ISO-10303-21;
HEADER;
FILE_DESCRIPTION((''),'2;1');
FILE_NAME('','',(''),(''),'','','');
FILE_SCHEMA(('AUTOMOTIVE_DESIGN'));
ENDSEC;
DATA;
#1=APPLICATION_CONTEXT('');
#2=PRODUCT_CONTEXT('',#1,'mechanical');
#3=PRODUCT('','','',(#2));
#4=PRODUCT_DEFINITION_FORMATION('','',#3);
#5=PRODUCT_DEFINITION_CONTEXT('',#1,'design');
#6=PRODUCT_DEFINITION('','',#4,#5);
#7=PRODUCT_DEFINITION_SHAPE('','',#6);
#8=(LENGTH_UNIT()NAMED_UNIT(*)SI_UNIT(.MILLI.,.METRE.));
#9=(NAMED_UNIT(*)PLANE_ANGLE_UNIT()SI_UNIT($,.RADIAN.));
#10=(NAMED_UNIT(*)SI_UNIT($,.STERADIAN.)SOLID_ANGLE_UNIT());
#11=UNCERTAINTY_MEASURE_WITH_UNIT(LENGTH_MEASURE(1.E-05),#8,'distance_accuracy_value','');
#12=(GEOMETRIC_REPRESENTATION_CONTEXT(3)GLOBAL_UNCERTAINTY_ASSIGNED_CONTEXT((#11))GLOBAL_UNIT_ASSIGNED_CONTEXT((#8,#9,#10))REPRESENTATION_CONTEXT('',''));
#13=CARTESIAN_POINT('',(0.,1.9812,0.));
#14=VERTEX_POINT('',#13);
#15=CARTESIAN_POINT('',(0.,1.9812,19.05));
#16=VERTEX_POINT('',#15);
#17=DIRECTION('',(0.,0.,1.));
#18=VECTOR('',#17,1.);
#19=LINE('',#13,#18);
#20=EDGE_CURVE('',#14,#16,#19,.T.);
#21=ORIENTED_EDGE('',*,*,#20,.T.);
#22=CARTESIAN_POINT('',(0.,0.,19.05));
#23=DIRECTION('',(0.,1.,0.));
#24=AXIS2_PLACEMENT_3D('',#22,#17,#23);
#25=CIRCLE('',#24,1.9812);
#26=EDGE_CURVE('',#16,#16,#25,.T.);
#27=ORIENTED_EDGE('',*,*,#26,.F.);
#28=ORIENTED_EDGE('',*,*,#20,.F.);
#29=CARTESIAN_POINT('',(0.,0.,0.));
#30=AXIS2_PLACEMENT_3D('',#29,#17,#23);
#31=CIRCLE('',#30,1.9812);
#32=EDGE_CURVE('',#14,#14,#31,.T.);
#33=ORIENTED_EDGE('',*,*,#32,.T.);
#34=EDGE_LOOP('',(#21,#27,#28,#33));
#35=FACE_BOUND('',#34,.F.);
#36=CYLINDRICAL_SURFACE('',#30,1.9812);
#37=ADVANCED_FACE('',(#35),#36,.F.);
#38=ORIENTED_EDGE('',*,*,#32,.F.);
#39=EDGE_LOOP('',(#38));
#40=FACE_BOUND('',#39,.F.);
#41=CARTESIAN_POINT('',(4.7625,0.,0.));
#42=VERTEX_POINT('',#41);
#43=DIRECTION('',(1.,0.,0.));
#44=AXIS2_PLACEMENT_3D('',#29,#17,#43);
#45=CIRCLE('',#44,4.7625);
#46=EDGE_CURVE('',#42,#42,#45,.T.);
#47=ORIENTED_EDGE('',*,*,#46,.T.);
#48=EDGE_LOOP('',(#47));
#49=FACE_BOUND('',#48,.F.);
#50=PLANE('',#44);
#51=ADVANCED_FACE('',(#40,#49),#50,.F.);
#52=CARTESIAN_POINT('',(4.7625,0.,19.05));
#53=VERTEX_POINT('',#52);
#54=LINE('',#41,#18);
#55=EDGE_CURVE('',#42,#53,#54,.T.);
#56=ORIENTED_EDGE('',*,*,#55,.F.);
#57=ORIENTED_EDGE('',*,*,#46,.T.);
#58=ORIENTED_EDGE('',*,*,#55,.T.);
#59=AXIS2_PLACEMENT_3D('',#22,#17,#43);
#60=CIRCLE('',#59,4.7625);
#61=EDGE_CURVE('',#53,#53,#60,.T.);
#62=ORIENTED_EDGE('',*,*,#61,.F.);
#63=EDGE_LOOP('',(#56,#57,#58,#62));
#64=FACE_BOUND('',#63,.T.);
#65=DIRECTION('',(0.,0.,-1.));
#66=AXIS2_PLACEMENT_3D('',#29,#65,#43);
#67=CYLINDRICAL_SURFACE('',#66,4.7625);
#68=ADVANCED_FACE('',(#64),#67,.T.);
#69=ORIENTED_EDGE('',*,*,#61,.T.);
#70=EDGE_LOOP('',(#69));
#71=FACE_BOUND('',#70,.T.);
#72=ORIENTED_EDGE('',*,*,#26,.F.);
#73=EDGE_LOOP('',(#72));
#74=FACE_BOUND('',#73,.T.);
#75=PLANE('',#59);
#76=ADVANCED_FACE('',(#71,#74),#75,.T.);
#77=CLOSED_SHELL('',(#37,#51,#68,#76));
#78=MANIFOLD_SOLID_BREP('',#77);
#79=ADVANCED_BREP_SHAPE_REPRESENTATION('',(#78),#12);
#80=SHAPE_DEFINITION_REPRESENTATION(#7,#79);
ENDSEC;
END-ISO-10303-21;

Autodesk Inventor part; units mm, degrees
ref_plane "YZ Plane" through (0, 0, 0) normal (1, 0, 0) x (0, 1, 0)
ref_plane "XZ Plane" through (0, 0, 0) normal (0, 1, 0) x (-1, 0, 0)
ref_plane "XY Plane" through (0, 0, 0) normal (0, 0, 1) x (1, 0, 0)
sketch "Sketch1" plane through (0, 0, 0) normal (0, 0, 1) x (1, 0, 0)
  circle A0 centre (0, 0) radius 4.7625
  dimension "d10" = 9.525
extrude "Extrusion1" add sketch "Sketch1" along normal blind 19.05
hole "Hole1" at (0, 0, 0) direction (0, 0, 1) diameter 3.9624 end through all thread size "10-32 UNF" class "2B" standard "ANSI Unified Screw Threads"
equation "\"d10\" = OutsideDiameter"
equation "\"d1\" = StandoffLength"
equation "\"StandoffLength\" = 19.05"
equation "\"HoleDiameter\" = 5.1054"
equation "\"OutsideDiameter\" = 9.525"
properties part number "CL4-024" material "Aluminum 6061"
